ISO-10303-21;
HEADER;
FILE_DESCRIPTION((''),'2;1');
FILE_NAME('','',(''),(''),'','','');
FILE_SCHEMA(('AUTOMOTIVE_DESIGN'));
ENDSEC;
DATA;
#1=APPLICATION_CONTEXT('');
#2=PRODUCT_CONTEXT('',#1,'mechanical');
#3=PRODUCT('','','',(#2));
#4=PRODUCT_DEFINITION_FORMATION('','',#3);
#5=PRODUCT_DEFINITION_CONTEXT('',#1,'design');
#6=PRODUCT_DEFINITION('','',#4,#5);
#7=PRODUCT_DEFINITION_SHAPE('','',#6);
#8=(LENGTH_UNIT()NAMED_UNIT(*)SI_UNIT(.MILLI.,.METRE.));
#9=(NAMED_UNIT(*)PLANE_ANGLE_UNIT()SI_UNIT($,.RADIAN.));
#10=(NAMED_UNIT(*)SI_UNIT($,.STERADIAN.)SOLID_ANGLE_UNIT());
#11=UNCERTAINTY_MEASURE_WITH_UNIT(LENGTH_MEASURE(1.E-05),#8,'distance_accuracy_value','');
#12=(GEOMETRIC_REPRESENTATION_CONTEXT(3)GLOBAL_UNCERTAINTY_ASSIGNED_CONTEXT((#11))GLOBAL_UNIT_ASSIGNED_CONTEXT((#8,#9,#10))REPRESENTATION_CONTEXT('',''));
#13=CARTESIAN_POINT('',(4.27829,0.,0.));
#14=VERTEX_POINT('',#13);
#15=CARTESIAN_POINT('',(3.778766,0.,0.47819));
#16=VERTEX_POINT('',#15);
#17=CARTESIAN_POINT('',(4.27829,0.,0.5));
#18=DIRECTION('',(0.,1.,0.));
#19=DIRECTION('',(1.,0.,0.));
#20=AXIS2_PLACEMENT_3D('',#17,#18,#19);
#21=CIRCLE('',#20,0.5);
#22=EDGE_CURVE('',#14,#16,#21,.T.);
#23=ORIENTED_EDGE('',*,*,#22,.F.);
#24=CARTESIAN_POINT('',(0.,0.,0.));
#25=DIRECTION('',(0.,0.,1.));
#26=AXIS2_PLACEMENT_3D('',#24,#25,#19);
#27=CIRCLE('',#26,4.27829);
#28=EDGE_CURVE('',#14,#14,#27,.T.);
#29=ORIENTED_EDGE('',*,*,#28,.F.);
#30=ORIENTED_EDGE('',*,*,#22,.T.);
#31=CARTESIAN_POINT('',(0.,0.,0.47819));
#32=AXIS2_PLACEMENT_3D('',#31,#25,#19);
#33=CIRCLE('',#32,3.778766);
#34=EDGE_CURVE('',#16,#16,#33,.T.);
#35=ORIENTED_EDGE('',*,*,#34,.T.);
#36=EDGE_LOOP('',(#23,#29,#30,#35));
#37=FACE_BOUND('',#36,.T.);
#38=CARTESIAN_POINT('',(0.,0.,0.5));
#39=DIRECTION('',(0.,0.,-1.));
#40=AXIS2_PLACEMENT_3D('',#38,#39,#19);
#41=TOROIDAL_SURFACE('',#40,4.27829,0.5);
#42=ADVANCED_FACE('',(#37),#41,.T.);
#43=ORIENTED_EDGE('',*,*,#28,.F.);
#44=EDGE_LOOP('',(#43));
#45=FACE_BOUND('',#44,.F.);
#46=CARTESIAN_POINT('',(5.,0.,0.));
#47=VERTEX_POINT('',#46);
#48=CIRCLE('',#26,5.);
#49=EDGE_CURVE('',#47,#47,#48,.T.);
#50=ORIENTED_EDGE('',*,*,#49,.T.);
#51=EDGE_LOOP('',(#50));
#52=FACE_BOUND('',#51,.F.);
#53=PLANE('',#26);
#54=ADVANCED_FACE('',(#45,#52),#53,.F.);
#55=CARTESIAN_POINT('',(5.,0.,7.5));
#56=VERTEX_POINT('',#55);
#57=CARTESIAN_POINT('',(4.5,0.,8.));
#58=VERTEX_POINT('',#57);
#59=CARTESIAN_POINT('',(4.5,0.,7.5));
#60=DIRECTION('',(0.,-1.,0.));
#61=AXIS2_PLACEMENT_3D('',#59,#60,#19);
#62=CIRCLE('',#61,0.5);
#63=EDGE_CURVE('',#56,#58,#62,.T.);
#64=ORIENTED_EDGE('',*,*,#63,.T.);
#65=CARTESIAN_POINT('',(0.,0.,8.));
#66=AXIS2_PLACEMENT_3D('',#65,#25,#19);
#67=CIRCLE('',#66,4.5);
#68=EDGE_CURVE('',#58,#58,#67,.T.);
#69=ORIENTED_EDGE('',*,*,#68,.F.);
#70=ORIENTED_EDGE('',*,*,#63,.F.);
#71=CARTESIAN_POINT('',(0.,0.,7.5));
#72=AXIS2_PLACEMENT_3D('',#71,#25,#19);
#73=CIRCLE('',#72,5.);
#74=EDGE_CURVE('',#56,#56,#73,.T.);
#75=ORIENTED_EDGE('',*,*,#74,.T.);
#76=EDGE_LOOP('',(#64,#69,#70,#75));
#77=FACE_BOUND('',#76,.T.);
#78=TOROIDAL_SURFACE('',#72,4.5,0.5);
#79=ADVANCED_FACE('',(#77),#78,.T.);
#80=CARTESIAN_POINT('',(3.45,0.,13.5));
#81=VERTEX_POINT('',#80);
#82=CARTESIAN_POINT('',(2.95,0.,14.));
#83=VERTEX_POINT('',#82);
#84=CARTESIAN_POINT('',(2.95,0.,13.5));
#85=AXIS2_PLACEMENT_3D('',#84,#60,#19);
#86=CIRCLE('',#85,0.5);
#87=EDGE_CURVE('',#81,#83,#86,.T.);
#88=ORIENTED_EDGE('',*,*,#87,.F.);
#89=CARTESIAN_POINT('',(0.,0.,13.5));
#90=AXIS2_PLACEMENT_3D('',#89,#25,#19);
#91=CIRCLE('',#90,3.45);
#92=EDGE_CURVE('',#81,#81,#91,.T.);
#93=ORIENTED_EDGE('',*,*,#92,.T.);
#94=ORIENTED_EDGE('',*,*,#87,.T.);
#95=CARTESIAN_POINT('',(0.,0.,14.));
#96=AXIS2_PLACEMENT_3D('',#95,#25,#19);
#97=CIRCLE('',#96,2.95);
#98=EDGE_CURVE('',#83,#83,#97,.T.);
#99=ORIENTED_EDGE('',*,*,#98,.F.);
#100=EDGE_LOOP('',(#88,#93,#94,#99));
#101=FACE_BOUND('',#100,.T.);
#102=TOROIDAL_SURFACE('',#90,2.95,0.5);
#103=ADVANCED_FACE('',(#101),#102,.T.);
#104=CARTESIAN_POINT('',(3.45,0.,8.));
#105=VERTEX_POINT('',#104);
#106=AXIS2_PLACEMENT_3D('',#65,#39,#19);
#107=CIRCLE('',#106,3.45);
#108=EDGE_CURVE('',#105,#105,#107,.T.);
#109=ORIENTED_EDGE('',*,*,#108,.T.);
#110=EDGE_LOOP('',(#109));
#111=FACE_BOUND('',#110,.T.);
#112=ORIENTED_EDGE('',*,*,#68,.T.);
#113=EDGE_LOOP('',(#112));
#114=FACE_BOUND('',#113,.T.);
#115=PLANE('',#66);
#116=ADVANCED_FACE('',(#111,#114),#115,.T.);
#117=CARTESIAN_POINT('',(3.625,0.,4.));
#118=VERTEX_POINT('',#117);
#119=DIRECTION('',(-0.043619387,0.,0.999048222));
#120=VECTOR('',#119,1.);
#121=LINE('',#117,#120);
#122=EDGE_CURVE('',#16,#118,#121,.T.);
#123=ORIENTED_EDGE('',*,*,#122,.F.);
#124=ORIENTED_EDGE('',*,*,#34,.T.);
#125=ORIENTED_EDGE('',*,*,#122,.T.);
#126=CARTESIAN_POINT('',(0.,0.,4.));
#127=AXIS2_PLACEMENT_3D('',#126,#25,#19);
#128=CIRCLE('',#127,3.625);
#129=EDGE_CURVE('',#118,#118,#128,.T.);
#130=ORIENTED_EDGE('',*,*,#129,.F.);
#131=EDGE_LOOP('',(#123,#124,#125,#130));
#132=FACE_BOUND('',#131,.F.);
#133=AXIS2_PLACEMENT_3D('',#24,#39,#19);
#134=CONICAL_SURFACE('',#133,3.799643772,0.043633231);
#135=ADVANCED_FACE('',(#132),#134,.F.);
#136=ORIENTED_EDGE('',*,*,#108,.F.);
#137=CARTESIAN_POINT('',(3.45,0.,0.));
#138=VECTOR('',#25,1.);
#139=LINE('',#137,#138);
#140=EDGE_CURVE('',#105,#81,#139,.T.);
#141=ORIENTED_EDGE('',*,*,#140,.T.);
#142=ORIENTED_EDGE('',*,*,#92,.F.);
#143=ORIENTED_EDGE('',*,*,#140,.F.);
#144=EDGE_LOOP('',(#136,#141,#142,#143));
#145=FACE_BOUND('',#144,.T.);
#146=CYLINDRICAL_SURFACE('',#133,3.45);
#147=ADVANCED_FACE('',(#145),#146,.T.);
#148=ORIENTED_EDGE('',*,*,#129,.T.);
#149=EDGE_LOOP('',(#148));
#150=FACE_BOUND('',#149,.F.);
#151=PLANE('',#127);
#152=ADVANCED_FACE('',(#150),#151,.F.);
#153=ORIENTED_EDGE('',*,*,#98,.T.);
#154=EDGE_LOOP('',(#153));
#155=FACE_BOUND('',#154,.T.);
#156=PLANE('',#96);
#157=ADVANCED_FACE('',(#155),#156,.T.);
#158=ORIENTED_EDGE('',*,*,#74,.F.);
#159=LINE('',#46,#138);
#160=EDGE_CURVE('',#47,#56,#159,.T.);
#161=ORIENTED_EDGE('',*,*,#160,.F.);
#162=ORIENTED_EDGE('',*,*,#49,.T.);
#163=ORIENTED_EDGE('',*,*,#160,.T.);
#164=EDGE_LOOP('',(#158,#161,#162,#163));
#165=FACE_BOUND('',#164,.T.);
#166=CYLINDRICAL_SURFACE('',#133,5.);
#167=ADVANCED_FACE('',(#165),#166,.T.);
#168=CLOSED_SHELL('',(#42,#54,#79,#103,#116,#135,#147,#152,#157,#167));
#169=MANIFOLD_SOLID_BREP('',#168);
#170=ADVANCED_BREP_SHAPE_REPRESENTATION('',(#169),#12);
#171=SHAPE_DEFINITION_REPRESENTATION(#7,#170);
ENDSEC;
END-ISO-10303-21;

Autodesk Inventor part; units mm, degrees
ref_plane "YZ Plane" through (0, 0, 0) normal (1, 0, 0) x (0, 1, 0)
ref_plane "XZ Plane" through (0, 0, 0) normal (0, 1, 0) x (-1, 0, 0)
ref_plane "XY Plane" through (0, 0, 0) normal (0, 0, 1) x (1, 0, 0)
sketch "Sketch1" plane through (0, 0, 0) normal (0, 0, 1) x (1, 0, 0)
  circle A0 centre (0, 0) radius 5
  circle A1 centre (0, 0) radius 3.45
  circle A2 centre (0, 0) radius 3.625
  dimension "d0" = 10
  dimension "d1" = 6.9
  dimension "d2" = 7.25
extrude "Extrusion1" add sketch "Sketch1" along normal blind 8 contours A0 | A1 | A2
extrude "Extrusion2" add sketch "Sketch1" along normal blind 14 contours A1
extrude "Extrusion3" cut sketch "Sketch1" along normal blind 4 contours A1 | A2
draft "FaceDraft1" angle 2.5 pull direction (0, 0, -1) faces at (3.6132, -0.2917, 2.6667) fixed edges at (-3.625, 0, 4)
fillet "Fillet1" radius 0.5 3 edges at (-3.45, 0, 14) (-5, 0, 8) (-3.7996, 0, 0)
properties part number "button"
